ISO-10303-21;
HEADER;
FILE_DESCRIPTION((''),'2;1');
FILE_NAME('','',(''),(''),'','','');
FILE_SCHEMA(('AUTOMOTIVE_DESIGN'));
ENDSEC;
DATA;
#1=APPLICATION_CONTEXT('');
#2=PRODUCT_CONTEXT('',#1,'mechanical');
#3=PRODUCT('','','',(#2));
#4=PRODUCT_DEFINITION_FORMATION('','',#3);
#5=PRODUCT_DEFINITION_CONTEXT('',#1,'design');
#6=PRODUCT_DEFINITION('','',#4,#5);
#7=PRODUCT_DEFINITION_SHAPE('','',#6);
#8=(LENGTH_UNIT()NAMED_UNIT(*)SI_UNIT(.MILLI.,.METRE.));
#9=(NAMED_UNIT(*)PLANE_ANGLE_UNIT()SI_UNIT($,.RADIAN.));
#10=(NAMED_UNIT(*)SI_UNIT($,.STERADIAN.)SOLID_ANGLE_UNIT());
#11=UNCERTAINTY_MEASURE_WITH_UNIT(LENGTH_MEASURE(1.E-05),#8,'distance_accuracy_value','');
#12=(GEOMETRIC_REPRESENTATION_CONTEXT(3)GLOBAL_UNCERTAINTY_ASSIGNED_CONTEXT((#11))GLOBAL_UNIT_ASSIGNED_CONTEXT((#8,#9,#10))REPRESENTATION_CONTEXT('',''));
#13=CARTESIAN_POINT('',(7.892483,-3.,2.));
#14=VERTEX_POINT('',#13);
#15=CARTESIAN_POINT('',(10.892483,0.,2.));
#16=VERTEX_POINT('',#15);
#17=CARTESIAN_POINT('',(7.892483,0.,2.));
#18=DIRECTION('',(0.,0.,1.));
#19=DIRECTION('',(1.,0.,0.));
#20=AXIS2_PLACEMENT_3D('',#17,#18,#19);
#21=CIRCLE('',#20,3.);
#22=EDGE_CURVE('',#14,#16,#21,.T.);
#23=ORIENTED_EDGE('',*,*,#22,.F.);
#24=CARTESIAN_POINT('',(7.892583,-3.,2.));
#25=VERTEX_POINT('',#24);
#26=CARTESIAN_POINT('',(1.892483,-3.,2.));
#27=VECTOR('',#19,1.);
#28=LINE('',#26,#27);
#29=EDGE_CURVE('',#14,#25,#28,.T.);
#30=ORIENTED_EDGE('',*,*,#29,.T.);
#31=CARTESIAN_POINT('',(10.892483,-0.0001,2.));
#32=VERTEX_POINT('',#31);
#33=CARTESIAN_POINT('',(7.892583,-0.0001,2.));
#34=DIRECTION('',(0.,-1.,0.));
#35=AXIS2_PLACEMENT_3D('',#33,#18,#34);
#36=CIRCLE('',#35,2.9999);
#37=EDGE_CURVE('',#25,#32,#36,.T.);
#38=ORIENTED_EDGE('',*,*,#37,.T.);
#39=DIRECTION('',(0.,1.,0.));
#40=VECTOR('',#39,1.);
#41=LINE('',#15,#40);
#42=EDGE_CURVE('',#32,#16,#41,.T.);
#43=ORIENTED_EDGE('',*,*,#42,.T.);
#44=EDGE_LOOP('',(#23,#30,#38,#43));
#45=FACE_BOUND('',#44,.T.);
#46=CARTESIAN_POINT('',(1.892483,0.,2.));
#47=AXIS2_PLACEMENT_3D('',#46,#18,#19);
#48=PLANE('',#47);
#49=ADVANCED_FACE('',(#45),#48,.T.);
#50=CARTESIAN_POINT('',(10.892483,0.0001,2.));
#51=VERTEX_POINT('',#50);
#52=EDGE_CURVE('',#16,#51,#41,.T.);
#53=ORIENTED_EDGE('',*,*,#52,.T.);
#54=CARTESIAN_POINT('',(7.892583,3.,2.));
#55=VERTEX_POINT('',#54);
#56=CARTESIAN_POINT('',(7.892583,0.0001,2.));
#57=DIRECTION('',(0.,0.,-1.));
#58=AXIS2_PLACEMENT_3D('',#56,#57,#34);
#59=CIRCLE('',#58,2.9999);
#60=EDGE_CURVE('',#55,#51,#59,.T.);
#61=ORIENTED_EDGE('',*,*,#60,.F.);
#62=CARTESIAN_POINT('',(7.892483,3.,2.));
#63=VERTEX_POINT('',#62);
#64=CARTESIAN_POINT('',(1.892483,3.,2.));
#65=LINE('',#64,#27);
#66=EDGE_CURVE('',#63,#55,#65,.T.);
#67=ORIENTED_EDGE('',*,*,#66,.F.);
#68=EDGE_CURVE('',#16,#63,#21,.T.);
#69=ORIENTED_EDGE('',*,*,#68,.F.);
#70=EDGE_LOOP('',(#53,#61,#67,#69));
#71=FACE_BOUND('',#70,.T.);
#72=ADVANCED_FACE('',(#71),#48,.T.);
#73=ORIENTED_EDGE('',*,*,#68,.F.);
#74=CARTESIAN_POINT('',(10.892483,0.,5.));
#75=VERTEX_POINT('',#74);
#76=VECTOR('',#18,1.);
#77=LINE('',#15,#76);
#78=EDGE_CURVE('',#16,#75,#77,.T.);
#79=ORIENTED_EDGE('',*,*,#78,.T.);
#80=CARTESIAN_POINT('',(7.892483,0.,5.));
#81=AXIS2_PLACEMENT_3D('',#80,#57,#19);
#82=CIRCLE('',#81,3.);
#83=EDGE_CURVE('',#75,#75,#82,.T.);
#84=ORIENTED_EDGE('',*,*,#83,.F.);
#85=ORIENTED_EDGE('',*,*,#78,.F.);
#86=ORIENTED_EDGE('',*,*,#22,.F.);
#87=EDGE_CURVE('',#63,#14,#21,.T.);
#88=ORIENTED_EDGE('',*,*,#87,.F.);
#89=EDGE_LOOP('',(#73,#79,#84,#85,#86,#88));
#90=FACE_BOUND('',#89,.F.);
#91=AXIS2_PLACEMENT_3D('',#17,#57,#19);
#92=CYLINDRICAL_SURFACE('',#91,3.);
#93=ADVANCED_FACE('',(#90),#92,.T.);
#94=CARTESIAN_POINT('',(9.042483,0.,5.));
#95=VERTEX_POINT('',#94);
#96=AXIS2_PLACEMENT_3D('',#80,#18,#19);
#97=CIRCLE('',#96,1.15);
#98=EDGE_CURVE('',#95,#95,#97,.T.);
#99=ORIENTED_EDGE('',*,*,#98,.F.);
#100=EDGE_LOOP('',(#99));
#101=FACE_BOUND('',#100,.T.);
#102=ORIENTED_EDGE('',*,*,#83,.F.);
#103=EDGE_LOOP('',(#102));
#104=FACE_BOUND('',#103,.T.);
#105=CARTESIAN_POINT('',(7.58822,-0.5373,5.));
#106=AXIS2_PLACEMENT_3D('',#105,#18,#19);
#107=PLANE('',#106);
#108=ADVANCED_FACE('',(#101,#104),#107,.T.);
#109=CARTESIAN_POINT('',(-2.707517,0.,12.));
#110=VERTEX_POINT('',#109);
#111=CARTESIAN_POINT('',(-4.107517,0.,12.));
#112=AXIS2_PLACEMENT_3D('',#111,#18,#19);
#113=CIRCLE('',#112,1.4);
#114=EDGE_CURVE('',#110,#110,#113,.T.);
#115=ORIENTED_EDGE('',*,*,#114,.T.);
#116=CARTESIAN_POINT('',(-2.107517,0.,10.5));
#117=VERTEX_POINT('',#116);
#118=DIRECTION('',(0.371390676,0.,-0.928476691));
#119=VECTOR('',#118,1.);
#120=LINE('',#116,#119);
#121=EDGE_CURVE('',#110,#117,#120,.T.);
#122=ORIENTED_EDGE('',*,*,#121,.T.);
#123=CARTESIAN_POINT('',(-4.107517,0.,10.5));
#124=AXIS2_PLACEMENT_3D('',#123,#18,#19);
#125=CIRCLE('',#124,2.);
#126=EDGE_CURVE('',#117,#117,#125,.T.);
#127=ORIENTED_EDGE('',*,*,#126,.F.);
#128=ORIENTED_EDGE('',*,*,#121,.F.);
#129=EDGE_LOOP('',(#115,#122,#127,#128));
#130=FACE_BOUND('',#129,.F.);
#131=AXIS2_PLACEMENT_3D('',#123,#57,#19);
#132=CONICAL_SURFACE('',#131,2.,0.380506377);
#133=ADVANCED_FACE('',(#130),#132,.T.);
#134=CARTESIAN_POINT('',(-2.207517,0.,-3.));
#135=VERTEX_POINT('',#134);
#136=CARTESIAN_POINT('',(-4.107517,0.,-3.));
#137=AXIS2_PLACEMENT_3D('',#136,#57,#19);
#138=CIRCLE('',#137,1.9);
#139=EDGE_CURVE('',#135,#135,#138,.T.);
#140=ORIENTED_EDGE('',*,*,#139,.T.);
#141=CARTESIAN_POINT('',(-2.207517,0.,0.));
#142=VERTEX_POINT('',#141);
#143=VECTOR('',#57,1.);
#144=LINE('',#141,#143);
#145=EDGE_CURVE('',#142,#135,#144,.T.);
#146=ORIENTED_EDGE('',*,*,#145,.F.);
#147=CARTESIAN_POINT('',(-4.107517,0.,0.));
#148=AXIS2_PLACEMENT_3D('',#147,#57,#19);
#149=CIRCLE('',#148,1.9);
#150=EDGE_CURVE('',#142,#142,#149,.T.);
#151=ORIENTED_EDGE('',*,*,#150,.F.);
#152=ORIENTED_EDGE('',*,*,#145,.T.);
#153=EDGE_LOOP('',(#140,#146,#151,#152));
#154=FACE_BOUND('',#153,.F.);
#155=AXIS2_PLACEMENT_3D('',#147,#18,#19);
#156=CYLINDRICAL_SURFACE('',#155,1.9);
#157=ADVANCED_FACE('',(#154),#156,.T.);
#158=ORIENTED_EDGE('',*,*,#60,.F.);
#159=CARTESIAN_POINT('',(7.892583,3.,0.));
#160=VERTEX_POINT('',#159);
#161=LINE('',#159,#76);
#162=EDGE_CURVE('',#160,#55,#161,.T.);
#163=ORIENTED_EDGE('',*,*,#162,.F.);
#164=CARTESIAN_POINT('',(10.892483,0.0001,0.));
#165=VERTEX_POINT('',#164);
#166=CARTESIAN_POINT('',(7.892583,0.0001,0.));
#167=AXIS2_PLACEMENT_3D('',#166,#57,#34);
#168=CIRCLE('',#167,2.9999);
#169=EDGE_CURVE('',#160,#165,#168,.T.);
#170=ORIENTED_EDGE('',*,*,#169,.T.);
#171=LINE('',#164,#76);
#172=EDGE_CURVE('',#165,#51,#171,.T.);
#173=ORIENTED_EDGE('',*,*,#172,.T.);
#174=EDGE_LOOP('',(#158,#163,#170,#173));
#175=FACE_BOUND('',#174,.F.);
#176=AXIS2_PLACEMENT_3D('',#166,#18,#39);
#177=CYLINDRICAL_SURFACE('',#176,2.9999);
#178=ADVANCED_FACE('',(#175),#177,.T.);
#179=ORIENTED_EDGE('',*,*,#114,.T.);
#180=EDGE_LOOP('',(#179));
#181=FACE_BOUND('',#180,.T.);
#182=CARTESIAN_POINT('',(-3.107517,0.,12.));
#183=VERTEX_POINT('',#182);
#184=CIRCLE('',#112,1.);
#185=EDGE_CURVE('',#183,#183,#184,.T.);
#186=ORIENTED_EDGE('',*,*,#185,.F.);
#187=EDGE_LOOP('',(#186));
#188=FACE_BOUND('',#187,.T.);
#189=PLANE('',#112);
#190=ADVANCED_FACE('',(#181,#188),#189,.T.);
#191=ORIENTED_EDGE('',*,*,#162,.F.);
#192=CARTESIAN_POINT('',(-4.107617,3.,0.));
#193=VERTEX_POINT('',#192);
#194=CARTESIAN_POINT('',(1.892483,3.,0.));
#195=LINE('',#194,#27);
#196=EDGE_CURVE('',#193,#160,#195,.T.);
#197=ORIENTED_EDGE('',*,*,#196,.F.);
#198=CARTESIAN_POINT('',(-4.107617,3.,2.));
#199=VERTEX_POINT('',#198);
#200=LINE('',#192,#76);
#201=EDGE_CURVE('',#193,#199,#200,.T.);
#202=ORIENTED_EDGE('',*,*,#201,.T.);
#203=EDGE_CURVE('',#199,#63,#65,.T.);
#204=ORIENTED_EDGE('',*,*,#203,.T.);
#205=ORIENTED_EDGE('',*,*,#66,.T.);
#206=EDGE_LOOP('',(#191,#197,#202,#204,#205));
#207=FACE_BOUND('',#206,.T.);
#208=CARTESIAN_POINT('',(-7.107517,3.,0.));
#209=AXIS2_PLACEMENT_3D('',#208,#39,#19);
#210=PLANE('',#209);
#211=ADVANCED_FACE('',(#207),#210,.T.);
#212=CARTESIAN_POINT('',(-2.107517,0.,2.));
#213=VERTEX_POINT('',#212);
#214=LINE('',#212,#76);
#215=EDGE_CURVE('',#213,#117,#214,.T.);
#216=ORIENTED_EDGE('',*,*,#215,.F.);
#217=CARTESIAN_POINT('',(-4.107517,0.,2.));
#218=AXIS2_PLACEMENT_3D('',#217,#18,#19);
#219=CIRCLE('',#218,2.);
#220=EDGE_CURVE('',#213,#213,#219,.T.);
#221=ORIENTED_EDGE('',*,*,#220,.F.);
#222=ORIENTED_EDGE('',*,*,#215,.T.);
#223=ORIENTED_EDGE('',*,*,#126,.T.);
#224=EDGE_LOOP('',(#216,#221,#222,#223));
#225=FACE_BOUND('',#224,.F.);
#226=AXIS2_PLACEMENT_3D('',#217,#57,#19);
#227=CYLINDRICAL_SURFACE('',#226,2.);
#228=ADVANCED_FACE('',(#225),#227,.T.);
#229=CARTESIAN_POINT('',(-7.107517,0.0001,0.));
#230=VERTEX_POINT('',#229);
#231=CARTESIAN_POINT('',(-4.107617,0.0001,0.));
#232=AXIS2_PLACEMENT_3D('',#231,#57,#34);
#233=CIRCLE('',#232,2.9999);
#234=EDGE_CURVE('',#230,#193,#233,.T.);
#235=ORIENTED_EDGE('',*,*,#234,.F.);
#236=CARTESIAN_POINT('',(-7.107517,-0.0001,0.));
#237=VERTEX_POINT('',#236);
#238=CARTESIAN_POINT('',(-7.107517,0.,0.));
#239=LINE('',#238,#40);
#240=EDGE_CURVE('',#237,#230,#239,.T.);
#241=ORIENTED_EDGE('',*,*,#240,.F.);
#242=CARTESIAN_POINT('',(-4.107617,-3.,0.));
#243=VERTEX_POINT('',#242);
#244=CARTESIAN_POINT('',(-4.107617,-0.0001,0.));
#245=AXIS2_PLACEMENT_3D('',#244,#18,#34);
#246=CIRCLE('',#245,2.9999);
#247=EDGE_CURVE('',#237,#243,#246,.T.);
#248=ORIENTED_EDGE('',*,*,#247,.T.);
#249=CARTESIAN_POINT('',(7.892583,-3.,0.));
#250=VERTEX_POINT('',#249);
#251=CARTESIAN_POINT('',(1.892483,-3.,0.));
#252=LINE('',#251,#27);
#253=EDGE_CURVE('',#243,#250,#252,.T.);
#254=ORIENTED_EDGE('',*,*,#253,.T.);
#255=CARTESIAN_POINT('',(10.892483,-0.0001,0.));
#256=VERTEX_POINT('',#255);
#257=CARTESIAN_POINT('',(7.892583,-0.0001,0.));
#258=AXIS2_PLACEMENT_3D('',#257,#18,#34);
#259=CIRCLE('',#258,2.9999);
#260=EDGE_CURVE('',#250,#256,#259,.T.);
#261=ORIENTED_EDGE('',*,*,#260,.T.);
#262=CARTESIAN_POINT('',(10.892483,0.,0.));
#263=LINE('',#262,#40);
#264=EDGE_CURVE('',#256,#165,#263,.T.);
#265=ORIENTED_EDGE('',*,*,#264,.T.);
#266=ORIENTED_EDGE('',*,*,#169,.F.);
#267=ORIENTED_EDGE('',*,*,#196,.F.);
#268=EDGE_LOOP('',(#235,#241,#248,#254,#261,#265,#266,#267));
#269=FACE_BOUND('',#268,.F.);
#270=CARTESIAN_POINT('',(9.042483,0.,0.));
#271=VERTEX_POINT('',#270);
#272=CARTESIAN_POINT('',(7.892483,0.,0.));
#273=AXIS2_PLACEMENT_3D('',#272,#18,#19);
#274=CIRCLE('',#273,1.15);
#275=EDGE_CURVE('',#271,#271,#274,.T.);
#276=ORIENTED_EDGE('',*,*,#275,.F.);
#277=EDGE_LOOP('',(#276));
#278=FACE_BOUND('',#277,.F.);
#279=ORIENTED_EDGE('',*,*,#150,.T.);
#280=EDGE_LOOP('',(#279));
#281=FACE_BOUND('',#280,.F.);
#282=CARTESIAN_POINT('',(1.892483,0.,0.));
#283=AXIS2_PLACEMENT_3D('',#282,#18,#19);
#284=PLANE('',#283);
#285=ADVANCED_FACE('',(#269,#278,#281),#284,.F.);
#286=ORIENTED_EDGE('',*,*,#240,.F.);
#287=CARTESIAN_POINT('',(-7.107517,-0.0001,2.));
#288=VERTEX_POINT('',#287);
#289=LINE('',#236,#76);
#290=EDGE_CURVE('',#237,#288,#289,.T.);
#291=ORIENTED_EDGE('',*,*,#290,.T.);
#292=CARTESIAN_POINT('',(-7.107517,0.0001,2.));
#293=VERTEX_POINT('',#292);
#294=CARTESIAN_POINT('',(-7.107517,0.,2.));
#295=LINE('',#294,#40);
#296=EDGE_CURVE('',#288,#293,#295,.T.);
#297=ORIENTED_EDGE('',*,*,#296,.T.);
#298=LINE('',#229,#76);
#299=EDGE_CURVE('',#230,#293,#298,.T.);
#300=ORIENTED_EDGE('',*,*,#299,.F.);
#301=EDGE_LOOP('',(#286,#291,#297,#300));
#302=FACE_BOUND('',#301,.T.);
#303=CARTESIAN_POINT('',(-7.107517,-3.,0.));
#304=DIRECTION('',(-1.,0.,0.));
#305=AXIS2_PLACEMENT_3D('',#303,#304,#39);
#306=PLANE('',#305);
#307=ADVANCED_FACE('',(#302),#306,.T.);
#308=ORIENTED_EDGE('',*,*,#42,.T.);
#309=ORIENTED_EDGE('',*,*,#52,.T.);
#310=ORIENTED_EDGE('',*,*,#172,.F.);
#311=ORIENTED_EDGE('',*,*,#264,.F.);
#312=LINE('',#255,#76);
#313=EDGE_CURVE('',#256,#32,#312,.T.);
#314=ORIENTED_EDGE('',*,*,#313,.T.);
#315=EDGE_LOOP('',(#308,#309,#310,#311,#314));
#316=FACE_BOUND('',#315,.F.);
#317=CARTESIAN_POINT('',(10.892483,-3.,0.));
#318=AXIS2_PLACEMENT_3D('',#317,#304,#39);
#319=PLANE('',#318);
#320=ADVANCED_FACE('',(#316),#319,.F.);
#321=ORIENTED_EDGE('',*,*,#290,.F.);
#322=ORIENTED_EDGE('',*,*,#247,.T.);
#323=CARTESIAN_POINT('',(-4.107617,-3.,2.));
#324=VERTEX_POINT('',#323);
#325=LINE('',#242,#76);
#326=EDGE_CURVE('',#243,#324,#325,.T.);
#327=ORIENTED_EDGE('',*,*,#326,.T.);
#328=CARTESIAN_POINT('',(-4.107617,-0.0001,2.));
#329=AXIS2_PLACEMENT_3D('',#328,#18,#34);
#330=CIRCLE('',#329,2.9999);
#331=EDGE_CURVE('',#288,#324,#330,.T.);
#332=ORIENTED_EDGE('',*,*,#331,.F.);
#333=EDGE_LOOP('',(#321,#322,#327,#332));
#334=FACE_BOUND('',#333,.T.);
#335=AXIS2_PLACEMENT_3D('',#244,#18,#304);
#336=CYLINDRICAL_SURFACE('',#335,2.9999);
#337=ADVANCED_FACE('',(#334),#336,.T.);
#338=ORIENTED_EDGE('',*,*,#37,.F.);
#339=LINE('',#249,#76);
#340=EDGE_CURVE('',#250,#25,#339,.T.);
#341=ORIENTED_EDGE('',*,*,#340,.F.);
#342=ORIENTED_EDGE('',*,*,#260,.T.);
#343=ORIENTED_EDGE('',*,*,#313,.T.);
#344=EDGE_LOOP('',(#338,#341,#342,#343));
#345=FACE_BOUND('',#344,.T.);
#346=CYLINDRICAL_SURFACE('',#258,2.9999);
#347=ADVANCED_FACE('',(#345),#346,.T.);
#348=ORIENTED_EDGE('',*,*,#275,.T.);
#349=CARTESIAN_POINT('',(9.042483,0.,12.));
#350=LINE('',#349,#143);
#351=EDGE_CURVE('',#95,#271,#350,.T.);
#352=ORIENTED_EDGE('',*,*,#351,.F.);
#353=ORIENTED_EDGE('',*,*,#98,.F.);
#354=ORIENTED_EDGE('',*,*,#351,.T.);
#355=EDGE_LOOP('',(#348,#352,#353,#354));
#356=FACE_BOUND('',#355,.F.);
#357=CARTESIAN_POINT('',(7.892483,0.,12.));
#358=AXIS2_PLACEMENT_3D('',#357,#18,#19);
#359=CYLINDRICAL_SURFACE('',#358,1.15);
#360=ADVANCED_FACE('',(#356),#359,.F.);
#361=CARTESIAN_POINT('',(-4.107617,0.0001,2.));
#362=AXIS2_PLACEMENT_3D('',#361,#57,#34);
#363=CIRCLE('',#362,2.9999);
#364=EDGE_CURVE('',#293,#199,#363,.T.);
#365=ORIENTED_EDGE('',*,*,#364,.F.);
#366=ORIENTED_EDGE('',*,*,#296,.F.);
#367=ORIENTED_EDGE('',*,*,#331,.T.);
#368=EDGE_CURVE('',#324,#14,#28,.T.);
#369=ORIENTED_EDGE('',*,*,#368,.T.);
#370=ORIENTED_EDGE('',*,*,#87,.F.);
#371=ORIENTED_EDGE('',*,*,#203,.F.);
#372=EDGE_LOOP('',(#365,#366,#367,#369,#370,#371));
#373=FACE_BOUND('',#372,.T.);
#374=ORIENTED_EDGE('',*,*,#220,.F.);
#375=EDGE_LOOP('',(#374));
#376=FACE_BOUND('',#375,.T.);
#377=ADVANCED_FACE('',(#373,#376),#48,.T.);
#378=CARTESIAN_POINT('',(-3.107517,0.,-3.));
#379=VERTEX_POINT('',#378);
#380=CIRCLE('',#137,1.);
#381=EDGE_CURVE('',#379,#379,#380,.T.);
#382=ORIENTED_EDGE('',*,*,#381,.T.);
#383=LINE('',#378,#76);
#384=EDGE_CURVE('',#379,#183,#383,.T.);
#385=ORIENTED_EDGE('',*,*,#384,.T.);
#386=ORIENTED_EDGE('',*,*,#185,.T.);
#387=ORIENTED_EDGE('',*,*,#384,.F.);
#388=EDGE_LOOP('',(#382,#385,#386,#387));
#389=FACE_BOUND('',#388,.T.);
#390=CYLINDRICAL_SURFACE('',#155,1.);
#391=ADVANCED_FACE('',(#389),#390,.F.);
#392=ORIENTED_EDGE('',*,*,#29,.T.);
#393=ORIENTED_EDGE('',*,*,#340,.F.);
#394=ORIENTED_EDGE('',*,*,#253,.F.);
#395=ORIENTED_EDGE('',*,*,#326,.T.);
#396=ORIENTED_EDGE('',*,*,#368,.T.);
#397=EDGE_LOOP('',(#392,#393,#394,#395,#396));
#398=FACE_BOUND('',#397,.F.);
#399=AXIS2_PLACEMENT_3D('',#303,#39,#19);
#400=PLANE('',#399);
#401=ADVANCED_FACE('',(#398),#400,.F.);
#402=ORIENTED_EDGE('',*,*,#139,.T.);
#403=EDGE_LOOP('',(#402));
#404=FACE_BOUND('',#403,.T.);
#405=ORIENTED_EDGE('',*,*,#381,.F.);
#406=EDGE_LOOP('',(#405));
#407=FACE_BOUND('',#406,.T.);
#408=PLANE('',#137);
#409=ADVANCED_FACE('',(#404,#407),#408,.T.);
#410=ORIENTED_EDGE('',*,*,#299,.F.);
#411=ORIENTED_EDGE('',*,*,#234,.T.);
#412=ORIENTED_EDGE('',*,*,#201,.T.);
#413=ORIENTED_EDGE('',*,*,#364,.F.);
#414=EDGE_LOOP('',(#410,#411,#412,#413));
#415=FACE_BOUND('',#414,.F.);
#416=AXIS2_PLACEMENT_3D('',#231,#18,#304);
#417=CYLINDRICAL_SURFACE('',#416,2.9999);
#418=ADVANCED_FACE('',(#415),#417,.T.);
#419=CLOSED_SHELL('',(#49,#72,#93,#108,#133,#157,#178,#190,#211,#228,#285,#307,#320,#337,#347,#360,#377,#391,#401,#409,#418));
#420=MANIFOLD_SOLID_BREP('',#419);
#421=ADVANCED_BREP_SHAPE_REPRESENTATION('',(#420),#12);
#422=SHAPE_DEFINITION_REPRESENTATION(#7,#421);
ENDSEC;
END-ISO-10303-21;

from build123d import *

# Parameters (mm, degrees)
F0_W      = 18
F0_H      = 6
F1_DEPTH  = 2
F2_R      = 3
F2_R_2    = 2
F3_DEPTH  = 10
F4_R      = 1
F4_R_2    = 1.15
F5_DEPTH  = 20
F6_SIZE2  = 1.5
F6_SIZE   = 0.6
F7_W      = 11.6012076614
F7_H      = 11.8295210414
F8_DEPTH  = 7
F9_R      = 2.9999
F10_R     = 1.9
F10_R_2   = 1
F11_DEPTH = 3


# Not quite as in the source:
# - a fillet or chamfer is up to 0.001 mm smaller than in the source, because OpenCascade refuses the exact size


with BuildPart() as f1:
    # F0 (on Top) → F1 (new body)
    with BuildSketch(Plane.XY):
        with Locations((1.8924829921, 0)):
            Rectangle(F0_W, F0_H)
    extrude(amount=F1_DEPTH)

    # F2 (on face) → F3 (join)
    with BuildSketch(Plane.XY.offset(2)):
        with Locations((7.8924829921, 0)):
            Circle(F2_R)
        with Locations((-4.1075170079, 0)):
            Circle(F2_R_2)
    extrude(amount=F3_DEPTH)

    # F4 (on face) → F5 (cut)
    with BuildSketch(Plane.XY.offset(12)):
        with Locations((-4.1075170079, 0)):
            Circle(F4_R)
        with Locations((7.8924829921, 0)):
            Circle(F4_R_2)
    extrude(amount=-F5_DEPTH, mode=Mode.SUBTRACT)

    # F6
    f6_edges = [f1.edges().sort_by_distance(p)[0] for p in [
        (-6.107517, 0, 12),
    ]]
    f6_side = f1.faces().sort_by_distance((-6.050948, 0, 12))[0]
    chamfer(f6_edges, length=F6_SIZE, length2=F6_SIZE2, reference=f6_side)

    # F7 (on face) → F8 (cut)
    with BuildSketch(Plane.XY.offset(12)):
        with Locations((7.5882198871, -0.5373002496)):
            Rectangle(F7_W, F7_H)
    extrude(amount=-F8_DEPTH, mode=Mode.SUBTRACT)

    # F9 (radius 3 in the source; OpenCascade refuses exactly that, so slightly less here)
    f9_edges = [f1.edges().sort_by_distance(p)[0] for p in [
        (10.892483, -3, 1),
        (10.892483, 3, 1),
        (-7.107517, 3, 1),
        (-7.107517, -3, 1),
    ]]
    fillet(f9_edges, radius=F9_R)

    # F10 (on face) → F11 (join)
    with BuildSketch(Plane(origin=(0, 0, 0), x_dir=(1, 0, 0), z_dir=(0, 0, -1))):
        with Locations((-4.1075170079, 0)):
            Circle(F10_R)
        with Locations((-4.1075170079, 0)):
            Circle(F10_R_2, mode=Mode.SUBTRACT)
    extrude(amount=F11_DEPTH)


solid = f1.part
